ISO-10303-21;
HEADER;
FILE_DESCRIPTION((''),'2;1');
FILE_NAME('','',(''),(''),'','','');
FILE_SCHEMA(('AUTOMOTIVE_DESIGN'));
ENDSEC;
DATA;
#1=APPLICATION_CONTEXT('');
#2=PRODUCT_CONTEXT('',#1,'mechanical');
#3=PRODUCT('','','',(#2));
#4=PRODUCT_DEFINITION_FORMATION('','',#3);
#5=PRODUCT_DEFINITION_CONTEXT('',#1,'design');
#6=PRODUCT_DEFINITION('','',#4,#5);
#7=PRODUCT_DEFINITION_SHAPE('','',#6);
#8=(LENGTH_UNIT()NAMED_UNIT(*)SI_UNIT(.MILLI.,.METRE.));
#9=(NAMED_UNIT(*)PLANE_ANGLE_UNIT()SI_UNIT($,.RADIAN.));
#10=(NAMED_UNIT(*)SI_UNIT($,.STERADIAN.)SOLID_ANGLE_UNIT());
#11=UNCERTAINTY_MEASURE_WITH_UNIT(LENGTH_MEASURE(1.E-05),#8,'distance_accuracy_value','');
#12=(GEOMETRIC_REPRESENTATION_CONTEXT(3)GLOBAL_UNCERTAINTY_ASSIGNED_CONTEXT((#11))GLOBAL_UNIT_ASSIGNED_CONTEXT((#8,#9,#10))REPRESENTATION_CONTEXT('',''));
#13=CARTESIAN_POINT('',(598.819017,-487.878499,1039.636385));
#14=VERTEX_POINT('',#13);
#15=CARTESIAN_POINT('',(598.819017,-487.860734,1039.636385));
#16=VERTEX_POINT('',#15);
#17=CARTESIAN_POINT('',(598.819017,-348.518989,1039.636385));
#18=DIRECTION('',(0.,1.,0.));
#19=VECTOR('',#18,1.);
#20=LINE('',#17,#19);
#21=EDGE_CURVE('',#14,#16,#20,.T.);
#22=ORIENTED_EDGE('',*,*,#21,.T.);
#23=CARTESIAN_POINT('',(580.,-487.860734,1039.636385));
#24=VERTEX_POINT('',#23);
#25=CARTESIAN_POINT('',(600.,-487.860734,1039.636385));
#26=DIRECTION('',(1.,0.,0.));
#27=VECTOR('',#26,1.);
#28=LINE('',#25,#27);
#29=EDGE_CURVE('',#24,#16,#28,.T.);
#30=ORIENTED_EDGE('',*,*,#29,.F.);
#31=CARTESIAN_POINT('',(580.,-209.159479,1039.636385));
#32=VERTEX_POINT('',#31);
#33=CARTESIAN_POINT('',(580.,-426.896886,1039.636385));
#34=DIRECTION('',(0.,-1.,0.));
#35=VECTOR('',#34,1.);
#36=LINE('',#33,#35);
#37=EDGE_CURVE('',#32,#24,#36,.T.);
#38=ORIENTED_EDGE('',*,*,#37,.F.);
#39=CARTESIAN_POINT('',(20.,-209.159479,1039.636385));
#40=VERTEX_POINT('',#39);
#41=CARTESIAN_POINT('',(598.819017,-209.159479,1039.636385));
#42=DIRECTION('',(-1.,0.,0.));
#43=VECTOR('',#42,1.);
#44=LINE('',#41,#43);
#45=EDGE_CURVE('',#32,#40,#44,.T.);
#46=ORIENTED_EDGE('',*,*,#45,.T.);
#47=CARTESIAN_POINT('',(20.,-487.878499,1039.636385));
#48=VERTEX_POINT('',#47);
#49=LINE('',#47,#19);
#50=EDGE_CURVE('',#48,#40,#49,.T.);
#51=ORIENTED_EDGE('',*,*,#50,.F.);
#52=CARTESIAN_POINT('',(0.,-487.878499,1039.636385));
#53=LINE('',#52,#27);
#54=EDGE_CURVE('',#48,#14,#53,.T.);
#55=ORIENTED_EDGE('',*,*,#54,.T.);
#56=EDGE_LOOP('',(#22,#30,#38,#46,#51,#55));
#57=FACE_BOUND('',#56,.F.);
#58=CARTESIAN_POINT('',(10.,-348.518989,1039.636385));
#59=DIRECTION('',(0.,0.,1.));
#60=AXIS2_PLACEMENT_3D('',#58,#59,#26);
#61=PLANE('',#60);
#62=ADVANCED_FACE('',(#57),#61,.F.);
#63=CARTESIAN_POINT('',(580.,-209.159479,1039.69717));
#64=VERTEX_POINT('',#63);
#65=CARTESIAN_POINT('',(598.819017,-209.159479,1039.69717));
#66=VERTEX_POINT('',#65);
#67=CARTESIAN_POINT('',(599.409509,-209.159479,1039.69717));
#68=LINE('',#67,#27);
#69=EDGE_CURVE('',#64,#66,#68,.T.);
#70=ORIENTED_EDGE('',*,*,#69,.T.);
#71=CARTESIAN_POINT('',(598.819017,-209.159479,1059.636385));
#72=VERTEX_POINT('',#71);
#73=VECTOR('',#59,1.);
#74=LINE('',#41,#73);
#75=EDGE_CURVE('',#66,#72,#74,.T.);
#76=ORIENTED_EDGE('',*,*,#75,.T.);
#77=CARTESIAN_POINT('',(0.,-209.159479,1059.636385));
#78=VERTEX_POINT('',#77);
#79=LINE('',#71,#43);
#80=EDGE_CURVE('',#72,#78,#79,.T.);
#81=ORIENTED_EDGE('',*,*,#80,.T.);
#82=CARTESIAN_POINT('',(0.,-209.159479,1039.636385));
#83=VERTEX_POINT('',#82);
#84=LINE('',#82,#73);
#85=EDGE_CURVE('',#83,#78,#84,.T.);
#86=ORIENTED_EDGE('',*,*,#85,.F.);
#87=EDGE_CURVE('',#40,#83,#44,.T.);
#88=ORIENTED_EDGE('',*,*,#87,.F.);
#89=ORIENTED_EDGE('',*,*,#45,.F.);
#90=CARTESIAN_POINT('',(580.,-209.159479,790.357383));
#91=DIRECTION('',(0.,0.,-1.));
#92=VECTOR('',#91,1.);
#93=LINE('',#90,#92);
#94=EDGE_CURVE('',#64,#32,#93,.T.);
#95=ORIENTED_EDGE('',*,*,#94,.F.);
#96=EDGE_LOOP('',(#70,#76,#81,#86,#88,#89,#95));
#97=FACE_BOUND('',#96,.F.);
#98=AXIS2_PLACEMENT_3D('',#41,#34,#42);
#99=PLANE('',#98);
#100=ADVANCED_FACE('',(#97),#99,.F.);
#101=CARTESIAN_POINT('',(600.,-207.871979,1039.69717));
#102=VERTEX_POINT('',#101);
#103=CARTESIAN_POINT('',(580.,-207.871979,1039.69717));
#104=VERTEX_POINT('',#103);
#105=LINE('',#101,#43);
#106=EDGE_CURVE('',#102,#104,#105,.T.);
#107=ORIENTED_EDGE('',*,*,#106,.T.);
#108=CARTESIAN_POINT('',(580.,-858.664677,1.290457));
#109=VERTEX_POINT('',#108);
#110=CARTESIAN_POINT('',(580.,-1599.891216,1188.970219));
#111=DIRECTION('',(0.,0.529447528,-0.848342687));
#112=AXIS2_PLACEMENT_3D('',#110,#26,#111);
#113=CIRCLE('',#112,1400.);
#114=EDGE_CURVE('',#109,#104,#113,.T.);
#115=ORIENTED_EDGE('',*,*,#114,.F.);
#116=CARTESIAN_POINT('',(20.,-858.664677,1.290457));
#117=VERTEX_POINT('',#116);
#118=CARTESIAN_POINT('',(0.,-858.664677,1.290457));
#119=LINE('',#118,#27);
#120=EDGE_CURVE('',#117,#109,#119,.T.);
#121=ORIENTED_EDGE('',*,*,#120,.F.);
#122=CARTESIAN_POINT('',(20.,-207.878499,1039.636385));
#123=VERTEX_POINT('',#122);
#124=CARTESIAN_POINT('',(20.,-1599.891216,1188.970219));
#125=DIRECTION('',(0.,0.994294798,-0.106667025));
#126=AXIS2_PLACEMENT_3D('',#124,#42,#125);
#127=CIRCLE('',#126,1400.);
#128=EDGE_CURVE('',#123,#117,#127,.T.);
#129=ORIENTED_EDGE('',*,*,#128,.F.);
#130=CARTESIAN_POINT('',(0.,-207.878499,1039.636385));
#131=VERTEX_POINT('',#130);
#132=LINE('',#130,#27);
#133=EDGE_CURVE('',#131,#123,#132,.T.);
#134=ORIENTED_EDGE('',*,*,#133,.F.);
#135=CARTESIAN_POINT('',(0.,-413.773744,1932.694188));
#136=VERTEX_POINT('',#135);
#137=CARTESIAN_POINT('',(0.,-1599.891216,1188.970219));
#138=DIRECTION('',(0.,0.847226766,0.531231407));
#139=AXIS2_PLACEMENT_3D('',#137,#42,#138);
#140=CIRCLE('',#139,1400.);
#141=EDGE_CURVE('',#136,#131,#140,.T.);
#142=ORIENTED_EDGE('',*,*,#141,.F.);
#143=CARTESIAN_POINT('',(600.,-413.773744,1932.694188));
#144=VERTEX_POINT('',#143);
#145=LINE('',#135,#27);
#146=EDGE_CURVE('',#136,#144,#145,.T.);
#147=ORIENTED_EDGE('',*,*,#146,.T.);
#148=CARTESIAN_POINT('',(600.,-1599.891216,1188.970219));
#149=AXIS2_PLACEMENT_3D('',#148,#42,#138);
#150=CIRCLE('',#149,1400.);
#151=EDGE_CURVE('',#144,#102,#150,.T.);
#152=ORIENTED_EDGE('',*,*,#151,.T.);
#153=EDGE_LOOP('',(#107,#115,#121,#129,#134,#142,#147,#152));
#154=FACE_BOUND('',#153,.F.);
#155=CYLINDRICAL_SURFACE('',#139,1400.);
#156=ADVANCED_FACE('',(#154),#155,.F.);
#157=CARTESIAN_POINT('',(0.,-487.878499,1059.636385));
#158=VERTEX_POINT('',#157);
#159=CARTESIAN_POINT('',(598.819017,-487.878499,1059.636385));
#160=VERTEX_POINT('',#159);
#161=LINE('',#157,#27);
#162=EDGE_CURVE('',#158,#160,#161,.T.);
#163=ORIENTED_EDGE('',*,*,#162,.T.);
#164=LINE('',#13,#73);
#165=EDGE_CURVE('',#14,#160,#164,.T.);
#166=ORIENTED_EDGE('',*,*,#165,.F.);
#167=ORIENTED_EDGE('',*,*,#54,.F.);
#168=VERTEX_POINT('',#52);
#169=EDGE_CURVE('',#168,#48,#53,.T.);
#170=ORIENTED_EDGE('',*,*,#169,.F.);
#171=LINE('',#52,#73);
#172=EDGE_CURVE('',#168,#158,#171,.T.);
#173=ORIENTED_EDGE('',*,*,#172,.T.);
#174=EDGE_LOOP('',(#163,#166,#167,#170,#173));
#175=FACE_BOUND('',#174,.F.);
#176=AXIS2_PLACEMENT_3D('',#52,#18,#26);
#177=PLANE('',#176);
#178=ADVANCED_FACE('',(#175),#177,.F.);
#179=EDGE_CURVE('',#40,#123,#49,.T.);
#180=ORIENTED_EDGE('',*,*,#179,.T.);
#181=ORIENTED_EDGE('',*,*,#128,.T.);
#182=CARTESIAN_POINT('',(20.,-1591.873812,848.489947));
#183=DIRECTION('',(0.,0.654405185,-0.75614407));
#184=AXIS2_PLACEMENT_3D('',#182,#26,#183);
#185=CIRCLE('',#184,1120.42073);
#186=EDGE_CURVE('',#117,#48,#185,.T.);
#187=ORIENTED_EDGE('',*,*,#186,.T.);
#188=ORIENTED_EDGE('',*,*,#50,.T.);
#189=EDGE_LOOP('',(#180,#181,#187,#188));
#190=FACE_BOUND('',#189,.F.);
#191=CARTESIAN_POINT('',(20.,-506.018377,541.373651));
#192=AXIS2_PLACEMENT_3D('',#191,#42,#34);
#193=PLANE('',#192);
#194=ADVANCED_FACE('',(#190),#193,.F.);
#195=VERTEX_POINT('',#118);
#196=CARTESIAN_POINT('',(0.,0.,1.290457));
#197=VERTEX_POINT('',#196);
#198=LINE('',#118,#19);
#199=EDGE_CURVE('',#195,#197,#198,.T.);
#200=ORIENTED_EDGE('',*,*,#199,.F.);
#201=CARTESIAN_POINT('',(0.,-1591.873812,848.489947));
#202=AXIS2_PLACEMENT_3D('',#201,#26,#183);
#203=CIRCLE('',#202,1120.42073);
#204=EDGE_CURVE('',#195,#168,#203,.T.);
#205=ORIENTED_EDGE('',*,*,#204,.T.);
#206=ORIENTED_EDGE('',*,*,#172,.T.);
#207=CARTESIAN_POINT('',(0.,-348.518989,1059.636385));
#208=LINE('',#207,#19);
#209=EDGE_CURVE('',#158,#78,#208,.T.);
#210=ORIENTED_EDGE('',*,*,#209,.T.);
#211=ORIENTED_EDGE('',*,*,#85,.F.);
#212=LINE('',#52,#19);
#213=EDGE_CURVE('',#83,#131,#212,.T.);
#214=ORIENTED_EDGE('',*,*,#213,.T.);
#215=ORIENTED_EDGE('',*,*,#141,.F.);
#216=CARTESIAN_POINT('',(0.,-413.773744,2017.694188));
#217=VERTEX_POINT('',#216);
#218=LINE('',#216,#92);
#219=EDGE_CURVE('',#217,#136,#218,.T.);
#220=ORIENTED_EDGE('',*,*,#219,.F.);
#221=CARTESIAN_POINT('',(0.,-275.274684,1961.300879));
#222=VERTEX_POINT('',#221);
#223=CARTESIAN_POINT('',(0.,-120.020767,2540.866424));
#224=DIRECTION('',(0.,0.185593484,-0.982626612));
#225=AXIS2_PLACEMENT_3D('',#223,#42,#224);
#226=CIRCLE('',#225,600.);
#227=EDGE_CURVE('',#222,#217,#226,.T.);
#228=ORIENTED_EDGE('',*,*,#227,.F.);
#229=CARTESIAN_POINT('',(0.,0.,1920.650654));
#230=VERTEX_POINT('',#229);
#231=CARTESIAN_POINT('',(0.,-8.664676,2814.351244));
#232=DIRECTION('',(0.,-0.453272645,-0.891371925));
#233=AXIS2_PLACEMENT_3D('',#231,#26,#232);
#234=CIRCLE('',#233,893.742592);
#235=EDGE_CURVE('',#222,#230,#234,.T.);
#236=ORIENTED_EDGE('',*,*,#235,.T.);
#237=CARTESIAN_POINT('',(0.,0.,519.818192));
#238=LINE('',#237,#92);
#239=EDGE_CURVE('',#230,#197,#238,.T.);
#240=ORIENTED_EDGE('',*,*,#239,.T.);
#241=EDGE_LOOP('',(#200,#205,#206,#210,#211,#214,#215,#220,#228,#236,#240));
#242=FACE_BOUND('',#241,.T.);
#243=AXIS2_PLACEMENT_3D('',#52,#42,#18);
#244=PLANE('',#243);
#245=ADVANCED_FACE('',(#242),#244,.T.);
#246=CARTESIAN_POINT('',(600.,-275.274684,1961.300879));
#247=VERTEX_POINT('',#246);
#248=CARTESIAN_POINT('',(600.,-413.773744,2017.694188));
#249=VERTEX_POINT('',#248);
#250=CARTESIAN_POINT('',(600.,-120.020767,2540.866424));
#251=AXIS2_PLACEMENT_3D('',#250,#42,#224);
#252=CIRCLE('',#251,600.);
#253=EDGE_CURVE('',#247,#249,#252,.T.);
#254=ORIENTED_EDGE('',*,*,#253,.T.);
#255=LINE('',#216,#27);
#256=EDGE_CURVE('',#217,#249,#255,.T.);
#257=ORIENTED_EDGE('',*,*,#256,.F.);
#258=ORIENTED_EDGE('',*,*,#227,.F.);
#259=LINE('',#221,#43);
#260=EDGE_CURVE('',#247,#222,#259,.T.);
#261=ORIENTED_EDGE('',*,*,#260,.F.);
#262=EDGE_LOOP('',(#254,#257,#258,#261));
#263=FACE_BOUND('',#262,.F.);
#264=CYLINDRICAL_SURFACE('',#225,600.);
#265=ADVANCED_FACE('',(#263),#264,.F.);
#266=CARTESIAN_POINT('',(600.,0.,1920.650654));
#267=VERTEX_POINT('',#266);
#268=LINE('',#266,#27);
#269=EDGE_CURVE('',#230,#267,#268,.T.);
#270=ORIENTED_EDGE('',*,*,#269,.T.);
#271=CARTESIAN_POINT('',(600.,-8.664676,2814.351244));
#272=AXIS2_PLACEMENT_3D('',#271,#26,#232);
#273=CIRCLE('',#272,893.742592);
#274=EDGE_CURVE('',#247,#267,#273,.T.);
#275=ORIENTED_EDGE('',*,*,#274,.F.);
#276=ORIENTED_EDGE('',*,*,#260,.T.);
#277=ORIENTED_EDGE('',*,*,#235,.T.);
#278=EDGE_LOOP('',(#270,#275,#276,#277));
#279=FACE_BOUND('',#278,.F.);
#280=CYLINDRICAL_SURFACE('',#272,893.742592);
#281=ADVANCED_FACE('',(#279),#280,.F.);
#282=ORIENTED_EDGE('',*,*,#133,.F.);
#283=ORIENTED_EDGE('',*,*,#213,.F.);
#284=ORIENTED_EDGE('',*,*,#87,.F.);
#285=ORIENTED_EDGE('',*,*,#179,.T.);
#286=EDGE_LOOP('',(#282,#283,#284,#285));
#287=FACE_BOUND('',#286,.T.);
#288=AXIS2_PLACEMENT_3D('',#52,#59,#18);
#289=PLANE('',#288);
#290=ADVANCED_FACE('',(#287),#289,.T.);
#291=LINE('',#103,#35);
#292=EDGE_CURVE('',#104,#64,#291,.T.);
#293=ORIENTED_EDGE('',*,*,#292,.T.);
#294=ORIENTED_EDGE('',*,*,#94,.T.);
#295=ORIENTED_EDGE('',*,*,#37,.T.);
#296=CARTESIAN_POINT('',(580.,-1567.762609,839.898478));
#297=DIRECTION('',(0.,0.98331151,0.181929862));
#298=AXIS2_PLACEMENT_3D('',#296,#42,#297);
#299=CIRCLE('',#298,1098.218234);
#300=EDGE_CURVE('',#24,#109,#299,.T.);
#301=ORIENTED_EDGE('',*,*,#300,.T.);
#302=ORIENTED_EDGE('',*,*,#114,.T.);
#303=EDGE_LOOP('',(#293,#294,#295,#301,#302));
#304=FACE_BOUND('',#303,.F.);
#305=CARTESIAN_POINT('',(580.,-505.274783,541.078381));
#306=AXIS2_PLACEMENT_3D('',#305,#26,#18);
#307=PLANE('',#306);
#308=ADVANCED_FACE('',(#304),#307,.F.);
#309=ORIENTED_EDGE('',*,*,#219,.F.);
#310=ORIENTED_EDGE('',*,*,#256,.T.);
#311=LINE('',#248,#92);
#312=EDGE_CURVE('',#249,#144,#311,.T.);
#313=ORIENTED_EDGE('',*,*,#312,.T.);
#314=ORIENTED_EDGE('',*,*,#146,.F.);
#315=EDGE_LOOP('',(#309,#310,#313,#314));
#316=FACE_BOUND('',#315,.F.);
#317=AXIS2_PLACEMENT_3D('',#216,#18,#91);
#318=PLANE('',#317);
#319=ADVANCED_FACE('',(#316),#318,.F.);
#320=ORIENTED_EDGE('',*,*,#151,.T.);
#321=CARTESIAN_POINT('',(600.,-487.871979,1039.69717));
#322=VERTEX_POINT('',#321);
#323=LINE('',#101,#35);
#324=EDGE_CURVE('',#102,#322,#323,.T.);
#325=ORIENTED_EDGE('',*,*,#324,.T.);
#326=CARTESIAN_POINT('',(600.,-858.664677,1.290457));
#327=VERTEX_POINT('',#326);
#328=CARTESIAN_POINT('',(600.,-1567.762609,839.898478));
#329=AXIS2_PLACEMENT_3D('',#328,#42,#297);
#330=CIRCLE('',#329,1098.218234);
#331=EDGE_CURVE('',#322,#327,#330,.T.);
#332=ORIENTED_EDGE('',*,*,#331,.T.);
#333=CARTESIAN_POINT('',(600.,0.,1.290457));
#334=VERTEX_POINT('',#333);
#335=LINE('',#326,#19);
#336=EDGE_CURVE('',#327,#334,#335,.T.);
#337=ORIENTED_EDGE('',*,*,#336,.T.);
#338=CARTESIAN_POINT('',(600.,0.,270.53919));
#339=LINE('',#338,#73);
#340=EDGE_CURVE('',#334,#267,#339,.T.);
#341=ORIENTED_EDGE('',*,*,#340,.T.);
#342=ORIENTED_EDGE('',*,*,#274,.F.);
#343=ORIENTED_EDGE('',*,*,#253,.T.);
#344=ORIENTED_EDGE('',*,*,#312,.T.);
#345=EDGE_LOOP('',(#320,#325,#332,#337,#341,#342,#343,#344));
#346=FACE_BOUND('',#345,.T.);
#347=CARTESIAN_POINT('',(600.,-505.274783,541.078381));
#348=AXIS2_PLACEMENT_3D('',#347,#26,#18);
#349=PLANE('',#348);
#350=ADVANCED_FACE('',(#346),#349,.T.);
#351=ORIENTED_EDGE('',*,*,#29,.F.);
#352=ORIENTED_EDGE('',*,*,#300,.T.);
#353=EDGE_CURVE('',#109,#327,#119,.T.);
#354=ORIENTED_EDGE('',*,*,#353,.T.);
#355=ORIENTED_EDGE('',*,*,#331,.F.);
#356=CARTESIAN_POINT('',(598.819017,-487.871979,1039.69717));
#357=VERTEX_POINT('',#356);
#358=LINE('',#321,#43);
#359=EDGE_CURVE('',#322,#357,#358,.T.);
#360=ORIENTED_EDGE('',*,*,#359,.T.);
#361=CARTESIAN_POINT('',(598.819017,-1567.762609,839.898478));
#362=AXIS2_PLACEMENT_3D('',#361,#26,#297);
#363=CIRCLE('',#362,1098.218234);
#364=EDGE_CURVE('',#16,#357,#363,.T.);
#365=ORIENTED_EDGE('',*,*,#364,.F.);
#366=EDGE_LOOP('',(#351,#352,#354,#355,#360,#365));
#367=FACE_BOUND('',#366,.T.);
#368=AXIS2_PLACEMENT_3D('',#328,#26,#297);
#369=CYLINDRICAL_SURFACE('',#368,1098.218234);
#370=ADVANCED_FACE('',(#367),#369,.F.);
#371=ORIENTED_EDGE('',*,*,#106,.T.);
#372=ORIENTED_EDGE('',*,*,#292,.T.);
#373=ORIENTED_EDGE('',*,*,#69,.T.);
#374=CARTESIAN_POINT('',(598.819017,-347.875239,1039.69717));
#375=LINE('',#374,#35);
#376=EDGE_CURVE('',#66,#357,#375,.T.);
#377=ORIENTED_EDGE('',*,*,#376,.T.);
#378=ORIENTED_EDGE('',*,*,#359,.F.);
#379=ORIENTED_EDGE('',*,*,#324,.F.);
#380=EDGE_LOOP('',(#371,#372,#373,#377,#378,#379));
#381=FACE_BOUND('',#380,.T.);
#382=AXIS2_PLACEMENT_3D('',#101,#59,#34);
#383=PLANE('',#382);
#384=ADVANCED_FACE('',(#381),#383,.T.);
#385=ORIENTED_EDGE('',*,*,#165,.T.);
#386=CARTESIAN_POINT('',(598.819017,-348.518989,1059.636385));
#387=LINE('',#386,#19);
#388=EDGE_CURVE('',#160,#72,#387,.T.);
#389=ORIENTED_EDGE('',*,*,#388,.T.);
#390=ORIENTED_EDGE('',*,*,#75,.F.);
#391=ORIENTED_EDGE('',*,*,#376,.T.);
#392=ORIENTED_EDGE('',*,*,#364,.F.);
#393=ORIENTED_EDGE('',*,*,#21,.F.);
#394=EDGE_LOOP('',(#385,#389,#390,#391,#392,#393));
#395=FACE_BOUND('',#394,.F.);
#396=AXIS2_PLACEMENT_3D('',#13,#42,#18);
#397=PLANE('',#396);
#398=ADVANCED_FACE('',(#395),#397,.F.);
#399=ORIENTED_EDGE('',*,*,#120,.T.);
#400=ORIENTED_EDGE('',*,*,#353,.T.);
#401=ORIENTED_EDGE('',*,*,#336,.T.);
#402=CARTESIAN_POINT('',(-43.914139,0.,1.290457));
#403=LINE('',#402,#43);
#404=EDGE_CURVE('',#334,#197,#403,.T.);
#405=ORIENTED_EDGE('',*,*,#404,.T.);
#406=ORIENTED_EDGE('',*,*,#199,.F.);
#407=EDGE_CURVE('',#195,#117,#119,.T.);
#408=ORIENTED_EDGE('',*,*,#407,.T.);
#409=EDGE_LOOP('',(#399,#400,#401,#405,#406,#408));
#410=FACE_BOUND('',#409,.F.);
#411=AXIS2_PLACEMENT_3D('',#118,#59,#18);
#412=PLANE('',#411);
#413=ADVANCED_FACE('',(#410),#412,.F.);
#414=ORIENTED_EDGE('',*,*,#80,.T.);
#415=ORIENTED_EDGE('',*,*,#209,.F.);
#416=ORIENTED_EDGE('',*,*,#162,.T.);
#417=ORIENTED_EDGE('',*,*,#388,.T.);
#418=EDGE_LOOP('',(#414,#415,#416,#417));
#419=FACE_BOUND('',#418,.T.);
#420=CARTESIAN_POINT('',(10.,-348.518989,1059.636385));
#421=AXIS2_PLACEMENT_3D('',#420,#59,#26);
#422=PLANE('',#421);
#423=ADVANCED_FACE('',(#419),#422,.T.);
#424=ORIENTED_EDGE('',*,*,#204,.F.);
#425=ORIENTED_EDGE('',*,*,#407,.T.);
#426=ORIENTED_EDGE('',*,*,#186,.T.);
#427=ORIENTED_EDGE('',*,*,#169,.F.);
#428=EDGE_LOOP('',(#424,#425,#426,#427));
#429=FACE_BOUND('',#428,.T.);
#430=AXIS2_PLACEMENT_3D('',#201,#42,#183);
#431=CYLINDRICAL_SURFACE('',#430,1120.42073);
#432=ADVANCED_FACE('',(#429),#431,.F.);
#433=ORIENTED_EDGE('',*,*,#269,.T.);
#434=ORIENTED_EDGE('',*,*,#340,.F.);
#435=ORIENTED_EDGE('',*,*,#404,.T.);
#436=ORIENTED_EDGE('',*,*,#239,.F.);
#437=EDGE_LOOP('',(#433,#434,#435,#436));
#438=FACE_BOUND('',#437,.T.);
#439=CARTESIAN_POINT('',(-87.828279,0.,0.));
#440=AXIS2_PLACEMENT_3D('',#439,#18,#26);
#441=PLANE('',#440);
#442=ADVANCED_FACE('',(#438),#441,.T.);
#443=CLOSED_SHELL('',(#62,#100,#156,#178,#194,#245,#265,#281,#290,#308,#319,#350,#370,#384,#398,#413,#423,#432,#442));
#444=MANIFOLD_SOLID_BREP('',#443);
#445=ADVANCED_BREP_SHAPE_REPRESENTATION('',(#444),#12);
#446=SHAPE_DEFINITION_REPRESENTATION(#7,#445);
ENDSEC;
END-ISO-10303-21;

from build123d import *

# Parameters (mm, degrees)
F1_DEPTH  = 600
F3_DEPTH  = 600.001
F5_DEPTH  = 20
F7_DEPTH  = 20
F8_W      = 20
F8_H      = 278.7190201738
F8_W_2    = 578.8190174103
F9_DEPTH  = 20
F10_W     = 598.5316634178
F10_H     = 254.7840774059
F11_DEPTH = 2017.6951884178


# Not quite as in the source:
# - a feature names something its author has since deleted; it is built from what else it names


with BuildPart() as f1:
    # F0 (on Right) → F1 (new body)
    with BuildSketch(Plane.YZ):
        with BuildLine():
            ThreePointArc((-413.7737442203, 1932.6941884178), (-235.6171133469, 874.7152717166), (-858.6646769196, 1.2904570733))
            Line((-858.6646769196, 1.2904570733), (841.3353230804, 1.2904570733))
            ThreePointArc((841.3353230804, 1.2904570733), (218.2877610308, 874.7152723164), (396.4443930804, 1932.6941884178))
            Line((396.4443930804, 1932.6941884178), (396.4443930804, 2017.6941884178))
            ThreePointArc((396.4443930804, 2017.6941884178), (199.7456261802, 1948.7680536266), (-8.6646769196, 1951.2904570733))
            ThreePointArc((-8.6646769196, 1951.2904570733), (-217.0749786293, 1948.7680541113), (-413.7737442203, 2017.6941884178))
            Line((-413.7737442203, 2017.6941884178), (-413.7737442203, 1932.6941884178))
        make_face()
    extrude(amount=F1_DEPTH)

    # F2 (on face) → F3 (cut, through all)
    with BuildSketch(Plane.YZ.offset(600)):
        with BuildLine():
            Line((396.4443930804, 2017.6941884178), (-413.7737442203, 2017.6941884178))
            ThreePointArc((-413.7737442203, 2017.6941884178), (-345.7057427079, 1986.5957603046), (-275.2746839195, 1961.3008790249))
            ThreePointArc((-275.2746839195, 1961.3008790249), (-142.5331399832, 1941.2889121961), (-8.6646769196, 1951.2904570733))
            ThreePointArc((-8.6646769196, 1951.2904570733), (125.2037851776, 1941.2889117025), (257.9453283126, 1961.3008776288))
            ThreePointArc((257.9453283126, 1961.3008776288), (328.3763894007, 1986.5957594221), (396.4443930804, 2017.6941884178))
        make_face()
        with BuildLine():
            ThreePointArc((-8.6646769196, 1951.2904570733), (-142.5331399832, 1941.2889121961), (-275.2746839195, 1961.3008790249))
            ThreePointArc((-275.2746839195, 1961.3008790249), (-8.66467791, 1920.6086514411), (257.9453283126, 1961.3008776288))
            ThreePointArc((257.9453283126, 1961.3008776288), (125.2037851776, 1941.2889117025), (-8.6646769196, 1951.2904570733))
        make_face()
    extrude(amount=-F3_DEPTH, mode=Mode.SUBTRACT)

    # F4 (on face) → F5 (join)
    with BuildSketch(Plane.YZ.offset(600)):
        with BuildLine():
            ThreePointArc((-487.8719790556, 1039.6971702576), (-533.5033840935, 470.5867589871), (-858.6646769196, 1.2904570733))
            ThreePointArc((-858.6646769196, 1.2904570733), (-413.6127871917, 445.5030116798), (-207.8719790556, 1039.6971702576))
            Line((-207.8719790556, 1039.6971702576), (-487.8719790556, 1039.6971702576))
        make_face()
        with BuildLine():
            ThreePointArc((190.5426270267, 1039.6971702576), (396.283434362, 445.5030119538), (841.3353230804, 1.2904570733))
            ThreePointArc((841.3353230804, 1.2904570733), (516.1740306428, 470.5867590462), (470.5426270267, 1039.6971702576))
            Line((470.5426270267, 1039.6971702576), (190.5426270267, 1039.6971702576))
        make_face()
    extrude(amount=-F5_DEPTH)

    # F6 (on face) → F7 (join)
    with BuildSketch(Plane(origin=(0, 0, 0), x_dir=(0, -1, 0), z_dir=(-1, 0, 0))):
        with BuildLine():
            ThreePointArc((-841.3353230804, 1.2904570733), (-396.5475396439, 445.0817710452), (-190.6490020093, 1038.7085012816))
            Line((-190.6490020093, 1038.7085012816), (-470.6490020093, 1038.7085012816))
            ThreePointArc((-470.6490020093, 1038.7085012816), (-519.6815928842, 471.2934981386), (-841.3353230804, 1.2904570733))
        make_face()
        with BuildLine():
            ThreePointArc((207.878498719, 1039.6363848164), (413.6290200403, 445.4771111279), (858.6646769196, 1.2904570733))
            ThreePointArc((858.6646769196, 1.2904570733), (536.7100272294, 471.698228356), (487.878498719, 1039.6363848164))
            Line((487.878498719, 1039.6363848164), (207.878498719, 1039.6363848164))
        make_face()
    extrude(amount=-F7_DEPTH)

    # F8 (on face) → F9 (join)
    with BuildSketch(Plane.XY.offset(1039.6363848164)):
        with Locations((10, -348.5189886321)):
            Rectangle(F8_W, F8_H)
        with Locations((309.4095087051, -348.5189886321)):
            Rectangle(F8_W_2, F8_H)
    extrude(amount=F9_DEPTH)

    # F10 (on Top) → F11 (cut, through all)
    with BuildSketch(Plane.XY):
        Polygon((0, 963.8522267342), (0, 254.7840774059), (598.5316634178, 254.7840774059), (598.5316634178, 0), (664.8825407028, 0), (664.8825407028, 963.8522267342), align=None)
        Polygon((-87.8282785416, 0), (0, 0), (0, 254.7840774059), (0, 963.8522267342), (-87.8282785416, 963.8522267342), align=None)
        with Locations((299.2658317089, 127.392038703)):
            Rectangle(F10_W, F10_H)
    extrude(amount=F11_DEPTH, mode=Mode.SUBTRACT)


solid = f1.part
